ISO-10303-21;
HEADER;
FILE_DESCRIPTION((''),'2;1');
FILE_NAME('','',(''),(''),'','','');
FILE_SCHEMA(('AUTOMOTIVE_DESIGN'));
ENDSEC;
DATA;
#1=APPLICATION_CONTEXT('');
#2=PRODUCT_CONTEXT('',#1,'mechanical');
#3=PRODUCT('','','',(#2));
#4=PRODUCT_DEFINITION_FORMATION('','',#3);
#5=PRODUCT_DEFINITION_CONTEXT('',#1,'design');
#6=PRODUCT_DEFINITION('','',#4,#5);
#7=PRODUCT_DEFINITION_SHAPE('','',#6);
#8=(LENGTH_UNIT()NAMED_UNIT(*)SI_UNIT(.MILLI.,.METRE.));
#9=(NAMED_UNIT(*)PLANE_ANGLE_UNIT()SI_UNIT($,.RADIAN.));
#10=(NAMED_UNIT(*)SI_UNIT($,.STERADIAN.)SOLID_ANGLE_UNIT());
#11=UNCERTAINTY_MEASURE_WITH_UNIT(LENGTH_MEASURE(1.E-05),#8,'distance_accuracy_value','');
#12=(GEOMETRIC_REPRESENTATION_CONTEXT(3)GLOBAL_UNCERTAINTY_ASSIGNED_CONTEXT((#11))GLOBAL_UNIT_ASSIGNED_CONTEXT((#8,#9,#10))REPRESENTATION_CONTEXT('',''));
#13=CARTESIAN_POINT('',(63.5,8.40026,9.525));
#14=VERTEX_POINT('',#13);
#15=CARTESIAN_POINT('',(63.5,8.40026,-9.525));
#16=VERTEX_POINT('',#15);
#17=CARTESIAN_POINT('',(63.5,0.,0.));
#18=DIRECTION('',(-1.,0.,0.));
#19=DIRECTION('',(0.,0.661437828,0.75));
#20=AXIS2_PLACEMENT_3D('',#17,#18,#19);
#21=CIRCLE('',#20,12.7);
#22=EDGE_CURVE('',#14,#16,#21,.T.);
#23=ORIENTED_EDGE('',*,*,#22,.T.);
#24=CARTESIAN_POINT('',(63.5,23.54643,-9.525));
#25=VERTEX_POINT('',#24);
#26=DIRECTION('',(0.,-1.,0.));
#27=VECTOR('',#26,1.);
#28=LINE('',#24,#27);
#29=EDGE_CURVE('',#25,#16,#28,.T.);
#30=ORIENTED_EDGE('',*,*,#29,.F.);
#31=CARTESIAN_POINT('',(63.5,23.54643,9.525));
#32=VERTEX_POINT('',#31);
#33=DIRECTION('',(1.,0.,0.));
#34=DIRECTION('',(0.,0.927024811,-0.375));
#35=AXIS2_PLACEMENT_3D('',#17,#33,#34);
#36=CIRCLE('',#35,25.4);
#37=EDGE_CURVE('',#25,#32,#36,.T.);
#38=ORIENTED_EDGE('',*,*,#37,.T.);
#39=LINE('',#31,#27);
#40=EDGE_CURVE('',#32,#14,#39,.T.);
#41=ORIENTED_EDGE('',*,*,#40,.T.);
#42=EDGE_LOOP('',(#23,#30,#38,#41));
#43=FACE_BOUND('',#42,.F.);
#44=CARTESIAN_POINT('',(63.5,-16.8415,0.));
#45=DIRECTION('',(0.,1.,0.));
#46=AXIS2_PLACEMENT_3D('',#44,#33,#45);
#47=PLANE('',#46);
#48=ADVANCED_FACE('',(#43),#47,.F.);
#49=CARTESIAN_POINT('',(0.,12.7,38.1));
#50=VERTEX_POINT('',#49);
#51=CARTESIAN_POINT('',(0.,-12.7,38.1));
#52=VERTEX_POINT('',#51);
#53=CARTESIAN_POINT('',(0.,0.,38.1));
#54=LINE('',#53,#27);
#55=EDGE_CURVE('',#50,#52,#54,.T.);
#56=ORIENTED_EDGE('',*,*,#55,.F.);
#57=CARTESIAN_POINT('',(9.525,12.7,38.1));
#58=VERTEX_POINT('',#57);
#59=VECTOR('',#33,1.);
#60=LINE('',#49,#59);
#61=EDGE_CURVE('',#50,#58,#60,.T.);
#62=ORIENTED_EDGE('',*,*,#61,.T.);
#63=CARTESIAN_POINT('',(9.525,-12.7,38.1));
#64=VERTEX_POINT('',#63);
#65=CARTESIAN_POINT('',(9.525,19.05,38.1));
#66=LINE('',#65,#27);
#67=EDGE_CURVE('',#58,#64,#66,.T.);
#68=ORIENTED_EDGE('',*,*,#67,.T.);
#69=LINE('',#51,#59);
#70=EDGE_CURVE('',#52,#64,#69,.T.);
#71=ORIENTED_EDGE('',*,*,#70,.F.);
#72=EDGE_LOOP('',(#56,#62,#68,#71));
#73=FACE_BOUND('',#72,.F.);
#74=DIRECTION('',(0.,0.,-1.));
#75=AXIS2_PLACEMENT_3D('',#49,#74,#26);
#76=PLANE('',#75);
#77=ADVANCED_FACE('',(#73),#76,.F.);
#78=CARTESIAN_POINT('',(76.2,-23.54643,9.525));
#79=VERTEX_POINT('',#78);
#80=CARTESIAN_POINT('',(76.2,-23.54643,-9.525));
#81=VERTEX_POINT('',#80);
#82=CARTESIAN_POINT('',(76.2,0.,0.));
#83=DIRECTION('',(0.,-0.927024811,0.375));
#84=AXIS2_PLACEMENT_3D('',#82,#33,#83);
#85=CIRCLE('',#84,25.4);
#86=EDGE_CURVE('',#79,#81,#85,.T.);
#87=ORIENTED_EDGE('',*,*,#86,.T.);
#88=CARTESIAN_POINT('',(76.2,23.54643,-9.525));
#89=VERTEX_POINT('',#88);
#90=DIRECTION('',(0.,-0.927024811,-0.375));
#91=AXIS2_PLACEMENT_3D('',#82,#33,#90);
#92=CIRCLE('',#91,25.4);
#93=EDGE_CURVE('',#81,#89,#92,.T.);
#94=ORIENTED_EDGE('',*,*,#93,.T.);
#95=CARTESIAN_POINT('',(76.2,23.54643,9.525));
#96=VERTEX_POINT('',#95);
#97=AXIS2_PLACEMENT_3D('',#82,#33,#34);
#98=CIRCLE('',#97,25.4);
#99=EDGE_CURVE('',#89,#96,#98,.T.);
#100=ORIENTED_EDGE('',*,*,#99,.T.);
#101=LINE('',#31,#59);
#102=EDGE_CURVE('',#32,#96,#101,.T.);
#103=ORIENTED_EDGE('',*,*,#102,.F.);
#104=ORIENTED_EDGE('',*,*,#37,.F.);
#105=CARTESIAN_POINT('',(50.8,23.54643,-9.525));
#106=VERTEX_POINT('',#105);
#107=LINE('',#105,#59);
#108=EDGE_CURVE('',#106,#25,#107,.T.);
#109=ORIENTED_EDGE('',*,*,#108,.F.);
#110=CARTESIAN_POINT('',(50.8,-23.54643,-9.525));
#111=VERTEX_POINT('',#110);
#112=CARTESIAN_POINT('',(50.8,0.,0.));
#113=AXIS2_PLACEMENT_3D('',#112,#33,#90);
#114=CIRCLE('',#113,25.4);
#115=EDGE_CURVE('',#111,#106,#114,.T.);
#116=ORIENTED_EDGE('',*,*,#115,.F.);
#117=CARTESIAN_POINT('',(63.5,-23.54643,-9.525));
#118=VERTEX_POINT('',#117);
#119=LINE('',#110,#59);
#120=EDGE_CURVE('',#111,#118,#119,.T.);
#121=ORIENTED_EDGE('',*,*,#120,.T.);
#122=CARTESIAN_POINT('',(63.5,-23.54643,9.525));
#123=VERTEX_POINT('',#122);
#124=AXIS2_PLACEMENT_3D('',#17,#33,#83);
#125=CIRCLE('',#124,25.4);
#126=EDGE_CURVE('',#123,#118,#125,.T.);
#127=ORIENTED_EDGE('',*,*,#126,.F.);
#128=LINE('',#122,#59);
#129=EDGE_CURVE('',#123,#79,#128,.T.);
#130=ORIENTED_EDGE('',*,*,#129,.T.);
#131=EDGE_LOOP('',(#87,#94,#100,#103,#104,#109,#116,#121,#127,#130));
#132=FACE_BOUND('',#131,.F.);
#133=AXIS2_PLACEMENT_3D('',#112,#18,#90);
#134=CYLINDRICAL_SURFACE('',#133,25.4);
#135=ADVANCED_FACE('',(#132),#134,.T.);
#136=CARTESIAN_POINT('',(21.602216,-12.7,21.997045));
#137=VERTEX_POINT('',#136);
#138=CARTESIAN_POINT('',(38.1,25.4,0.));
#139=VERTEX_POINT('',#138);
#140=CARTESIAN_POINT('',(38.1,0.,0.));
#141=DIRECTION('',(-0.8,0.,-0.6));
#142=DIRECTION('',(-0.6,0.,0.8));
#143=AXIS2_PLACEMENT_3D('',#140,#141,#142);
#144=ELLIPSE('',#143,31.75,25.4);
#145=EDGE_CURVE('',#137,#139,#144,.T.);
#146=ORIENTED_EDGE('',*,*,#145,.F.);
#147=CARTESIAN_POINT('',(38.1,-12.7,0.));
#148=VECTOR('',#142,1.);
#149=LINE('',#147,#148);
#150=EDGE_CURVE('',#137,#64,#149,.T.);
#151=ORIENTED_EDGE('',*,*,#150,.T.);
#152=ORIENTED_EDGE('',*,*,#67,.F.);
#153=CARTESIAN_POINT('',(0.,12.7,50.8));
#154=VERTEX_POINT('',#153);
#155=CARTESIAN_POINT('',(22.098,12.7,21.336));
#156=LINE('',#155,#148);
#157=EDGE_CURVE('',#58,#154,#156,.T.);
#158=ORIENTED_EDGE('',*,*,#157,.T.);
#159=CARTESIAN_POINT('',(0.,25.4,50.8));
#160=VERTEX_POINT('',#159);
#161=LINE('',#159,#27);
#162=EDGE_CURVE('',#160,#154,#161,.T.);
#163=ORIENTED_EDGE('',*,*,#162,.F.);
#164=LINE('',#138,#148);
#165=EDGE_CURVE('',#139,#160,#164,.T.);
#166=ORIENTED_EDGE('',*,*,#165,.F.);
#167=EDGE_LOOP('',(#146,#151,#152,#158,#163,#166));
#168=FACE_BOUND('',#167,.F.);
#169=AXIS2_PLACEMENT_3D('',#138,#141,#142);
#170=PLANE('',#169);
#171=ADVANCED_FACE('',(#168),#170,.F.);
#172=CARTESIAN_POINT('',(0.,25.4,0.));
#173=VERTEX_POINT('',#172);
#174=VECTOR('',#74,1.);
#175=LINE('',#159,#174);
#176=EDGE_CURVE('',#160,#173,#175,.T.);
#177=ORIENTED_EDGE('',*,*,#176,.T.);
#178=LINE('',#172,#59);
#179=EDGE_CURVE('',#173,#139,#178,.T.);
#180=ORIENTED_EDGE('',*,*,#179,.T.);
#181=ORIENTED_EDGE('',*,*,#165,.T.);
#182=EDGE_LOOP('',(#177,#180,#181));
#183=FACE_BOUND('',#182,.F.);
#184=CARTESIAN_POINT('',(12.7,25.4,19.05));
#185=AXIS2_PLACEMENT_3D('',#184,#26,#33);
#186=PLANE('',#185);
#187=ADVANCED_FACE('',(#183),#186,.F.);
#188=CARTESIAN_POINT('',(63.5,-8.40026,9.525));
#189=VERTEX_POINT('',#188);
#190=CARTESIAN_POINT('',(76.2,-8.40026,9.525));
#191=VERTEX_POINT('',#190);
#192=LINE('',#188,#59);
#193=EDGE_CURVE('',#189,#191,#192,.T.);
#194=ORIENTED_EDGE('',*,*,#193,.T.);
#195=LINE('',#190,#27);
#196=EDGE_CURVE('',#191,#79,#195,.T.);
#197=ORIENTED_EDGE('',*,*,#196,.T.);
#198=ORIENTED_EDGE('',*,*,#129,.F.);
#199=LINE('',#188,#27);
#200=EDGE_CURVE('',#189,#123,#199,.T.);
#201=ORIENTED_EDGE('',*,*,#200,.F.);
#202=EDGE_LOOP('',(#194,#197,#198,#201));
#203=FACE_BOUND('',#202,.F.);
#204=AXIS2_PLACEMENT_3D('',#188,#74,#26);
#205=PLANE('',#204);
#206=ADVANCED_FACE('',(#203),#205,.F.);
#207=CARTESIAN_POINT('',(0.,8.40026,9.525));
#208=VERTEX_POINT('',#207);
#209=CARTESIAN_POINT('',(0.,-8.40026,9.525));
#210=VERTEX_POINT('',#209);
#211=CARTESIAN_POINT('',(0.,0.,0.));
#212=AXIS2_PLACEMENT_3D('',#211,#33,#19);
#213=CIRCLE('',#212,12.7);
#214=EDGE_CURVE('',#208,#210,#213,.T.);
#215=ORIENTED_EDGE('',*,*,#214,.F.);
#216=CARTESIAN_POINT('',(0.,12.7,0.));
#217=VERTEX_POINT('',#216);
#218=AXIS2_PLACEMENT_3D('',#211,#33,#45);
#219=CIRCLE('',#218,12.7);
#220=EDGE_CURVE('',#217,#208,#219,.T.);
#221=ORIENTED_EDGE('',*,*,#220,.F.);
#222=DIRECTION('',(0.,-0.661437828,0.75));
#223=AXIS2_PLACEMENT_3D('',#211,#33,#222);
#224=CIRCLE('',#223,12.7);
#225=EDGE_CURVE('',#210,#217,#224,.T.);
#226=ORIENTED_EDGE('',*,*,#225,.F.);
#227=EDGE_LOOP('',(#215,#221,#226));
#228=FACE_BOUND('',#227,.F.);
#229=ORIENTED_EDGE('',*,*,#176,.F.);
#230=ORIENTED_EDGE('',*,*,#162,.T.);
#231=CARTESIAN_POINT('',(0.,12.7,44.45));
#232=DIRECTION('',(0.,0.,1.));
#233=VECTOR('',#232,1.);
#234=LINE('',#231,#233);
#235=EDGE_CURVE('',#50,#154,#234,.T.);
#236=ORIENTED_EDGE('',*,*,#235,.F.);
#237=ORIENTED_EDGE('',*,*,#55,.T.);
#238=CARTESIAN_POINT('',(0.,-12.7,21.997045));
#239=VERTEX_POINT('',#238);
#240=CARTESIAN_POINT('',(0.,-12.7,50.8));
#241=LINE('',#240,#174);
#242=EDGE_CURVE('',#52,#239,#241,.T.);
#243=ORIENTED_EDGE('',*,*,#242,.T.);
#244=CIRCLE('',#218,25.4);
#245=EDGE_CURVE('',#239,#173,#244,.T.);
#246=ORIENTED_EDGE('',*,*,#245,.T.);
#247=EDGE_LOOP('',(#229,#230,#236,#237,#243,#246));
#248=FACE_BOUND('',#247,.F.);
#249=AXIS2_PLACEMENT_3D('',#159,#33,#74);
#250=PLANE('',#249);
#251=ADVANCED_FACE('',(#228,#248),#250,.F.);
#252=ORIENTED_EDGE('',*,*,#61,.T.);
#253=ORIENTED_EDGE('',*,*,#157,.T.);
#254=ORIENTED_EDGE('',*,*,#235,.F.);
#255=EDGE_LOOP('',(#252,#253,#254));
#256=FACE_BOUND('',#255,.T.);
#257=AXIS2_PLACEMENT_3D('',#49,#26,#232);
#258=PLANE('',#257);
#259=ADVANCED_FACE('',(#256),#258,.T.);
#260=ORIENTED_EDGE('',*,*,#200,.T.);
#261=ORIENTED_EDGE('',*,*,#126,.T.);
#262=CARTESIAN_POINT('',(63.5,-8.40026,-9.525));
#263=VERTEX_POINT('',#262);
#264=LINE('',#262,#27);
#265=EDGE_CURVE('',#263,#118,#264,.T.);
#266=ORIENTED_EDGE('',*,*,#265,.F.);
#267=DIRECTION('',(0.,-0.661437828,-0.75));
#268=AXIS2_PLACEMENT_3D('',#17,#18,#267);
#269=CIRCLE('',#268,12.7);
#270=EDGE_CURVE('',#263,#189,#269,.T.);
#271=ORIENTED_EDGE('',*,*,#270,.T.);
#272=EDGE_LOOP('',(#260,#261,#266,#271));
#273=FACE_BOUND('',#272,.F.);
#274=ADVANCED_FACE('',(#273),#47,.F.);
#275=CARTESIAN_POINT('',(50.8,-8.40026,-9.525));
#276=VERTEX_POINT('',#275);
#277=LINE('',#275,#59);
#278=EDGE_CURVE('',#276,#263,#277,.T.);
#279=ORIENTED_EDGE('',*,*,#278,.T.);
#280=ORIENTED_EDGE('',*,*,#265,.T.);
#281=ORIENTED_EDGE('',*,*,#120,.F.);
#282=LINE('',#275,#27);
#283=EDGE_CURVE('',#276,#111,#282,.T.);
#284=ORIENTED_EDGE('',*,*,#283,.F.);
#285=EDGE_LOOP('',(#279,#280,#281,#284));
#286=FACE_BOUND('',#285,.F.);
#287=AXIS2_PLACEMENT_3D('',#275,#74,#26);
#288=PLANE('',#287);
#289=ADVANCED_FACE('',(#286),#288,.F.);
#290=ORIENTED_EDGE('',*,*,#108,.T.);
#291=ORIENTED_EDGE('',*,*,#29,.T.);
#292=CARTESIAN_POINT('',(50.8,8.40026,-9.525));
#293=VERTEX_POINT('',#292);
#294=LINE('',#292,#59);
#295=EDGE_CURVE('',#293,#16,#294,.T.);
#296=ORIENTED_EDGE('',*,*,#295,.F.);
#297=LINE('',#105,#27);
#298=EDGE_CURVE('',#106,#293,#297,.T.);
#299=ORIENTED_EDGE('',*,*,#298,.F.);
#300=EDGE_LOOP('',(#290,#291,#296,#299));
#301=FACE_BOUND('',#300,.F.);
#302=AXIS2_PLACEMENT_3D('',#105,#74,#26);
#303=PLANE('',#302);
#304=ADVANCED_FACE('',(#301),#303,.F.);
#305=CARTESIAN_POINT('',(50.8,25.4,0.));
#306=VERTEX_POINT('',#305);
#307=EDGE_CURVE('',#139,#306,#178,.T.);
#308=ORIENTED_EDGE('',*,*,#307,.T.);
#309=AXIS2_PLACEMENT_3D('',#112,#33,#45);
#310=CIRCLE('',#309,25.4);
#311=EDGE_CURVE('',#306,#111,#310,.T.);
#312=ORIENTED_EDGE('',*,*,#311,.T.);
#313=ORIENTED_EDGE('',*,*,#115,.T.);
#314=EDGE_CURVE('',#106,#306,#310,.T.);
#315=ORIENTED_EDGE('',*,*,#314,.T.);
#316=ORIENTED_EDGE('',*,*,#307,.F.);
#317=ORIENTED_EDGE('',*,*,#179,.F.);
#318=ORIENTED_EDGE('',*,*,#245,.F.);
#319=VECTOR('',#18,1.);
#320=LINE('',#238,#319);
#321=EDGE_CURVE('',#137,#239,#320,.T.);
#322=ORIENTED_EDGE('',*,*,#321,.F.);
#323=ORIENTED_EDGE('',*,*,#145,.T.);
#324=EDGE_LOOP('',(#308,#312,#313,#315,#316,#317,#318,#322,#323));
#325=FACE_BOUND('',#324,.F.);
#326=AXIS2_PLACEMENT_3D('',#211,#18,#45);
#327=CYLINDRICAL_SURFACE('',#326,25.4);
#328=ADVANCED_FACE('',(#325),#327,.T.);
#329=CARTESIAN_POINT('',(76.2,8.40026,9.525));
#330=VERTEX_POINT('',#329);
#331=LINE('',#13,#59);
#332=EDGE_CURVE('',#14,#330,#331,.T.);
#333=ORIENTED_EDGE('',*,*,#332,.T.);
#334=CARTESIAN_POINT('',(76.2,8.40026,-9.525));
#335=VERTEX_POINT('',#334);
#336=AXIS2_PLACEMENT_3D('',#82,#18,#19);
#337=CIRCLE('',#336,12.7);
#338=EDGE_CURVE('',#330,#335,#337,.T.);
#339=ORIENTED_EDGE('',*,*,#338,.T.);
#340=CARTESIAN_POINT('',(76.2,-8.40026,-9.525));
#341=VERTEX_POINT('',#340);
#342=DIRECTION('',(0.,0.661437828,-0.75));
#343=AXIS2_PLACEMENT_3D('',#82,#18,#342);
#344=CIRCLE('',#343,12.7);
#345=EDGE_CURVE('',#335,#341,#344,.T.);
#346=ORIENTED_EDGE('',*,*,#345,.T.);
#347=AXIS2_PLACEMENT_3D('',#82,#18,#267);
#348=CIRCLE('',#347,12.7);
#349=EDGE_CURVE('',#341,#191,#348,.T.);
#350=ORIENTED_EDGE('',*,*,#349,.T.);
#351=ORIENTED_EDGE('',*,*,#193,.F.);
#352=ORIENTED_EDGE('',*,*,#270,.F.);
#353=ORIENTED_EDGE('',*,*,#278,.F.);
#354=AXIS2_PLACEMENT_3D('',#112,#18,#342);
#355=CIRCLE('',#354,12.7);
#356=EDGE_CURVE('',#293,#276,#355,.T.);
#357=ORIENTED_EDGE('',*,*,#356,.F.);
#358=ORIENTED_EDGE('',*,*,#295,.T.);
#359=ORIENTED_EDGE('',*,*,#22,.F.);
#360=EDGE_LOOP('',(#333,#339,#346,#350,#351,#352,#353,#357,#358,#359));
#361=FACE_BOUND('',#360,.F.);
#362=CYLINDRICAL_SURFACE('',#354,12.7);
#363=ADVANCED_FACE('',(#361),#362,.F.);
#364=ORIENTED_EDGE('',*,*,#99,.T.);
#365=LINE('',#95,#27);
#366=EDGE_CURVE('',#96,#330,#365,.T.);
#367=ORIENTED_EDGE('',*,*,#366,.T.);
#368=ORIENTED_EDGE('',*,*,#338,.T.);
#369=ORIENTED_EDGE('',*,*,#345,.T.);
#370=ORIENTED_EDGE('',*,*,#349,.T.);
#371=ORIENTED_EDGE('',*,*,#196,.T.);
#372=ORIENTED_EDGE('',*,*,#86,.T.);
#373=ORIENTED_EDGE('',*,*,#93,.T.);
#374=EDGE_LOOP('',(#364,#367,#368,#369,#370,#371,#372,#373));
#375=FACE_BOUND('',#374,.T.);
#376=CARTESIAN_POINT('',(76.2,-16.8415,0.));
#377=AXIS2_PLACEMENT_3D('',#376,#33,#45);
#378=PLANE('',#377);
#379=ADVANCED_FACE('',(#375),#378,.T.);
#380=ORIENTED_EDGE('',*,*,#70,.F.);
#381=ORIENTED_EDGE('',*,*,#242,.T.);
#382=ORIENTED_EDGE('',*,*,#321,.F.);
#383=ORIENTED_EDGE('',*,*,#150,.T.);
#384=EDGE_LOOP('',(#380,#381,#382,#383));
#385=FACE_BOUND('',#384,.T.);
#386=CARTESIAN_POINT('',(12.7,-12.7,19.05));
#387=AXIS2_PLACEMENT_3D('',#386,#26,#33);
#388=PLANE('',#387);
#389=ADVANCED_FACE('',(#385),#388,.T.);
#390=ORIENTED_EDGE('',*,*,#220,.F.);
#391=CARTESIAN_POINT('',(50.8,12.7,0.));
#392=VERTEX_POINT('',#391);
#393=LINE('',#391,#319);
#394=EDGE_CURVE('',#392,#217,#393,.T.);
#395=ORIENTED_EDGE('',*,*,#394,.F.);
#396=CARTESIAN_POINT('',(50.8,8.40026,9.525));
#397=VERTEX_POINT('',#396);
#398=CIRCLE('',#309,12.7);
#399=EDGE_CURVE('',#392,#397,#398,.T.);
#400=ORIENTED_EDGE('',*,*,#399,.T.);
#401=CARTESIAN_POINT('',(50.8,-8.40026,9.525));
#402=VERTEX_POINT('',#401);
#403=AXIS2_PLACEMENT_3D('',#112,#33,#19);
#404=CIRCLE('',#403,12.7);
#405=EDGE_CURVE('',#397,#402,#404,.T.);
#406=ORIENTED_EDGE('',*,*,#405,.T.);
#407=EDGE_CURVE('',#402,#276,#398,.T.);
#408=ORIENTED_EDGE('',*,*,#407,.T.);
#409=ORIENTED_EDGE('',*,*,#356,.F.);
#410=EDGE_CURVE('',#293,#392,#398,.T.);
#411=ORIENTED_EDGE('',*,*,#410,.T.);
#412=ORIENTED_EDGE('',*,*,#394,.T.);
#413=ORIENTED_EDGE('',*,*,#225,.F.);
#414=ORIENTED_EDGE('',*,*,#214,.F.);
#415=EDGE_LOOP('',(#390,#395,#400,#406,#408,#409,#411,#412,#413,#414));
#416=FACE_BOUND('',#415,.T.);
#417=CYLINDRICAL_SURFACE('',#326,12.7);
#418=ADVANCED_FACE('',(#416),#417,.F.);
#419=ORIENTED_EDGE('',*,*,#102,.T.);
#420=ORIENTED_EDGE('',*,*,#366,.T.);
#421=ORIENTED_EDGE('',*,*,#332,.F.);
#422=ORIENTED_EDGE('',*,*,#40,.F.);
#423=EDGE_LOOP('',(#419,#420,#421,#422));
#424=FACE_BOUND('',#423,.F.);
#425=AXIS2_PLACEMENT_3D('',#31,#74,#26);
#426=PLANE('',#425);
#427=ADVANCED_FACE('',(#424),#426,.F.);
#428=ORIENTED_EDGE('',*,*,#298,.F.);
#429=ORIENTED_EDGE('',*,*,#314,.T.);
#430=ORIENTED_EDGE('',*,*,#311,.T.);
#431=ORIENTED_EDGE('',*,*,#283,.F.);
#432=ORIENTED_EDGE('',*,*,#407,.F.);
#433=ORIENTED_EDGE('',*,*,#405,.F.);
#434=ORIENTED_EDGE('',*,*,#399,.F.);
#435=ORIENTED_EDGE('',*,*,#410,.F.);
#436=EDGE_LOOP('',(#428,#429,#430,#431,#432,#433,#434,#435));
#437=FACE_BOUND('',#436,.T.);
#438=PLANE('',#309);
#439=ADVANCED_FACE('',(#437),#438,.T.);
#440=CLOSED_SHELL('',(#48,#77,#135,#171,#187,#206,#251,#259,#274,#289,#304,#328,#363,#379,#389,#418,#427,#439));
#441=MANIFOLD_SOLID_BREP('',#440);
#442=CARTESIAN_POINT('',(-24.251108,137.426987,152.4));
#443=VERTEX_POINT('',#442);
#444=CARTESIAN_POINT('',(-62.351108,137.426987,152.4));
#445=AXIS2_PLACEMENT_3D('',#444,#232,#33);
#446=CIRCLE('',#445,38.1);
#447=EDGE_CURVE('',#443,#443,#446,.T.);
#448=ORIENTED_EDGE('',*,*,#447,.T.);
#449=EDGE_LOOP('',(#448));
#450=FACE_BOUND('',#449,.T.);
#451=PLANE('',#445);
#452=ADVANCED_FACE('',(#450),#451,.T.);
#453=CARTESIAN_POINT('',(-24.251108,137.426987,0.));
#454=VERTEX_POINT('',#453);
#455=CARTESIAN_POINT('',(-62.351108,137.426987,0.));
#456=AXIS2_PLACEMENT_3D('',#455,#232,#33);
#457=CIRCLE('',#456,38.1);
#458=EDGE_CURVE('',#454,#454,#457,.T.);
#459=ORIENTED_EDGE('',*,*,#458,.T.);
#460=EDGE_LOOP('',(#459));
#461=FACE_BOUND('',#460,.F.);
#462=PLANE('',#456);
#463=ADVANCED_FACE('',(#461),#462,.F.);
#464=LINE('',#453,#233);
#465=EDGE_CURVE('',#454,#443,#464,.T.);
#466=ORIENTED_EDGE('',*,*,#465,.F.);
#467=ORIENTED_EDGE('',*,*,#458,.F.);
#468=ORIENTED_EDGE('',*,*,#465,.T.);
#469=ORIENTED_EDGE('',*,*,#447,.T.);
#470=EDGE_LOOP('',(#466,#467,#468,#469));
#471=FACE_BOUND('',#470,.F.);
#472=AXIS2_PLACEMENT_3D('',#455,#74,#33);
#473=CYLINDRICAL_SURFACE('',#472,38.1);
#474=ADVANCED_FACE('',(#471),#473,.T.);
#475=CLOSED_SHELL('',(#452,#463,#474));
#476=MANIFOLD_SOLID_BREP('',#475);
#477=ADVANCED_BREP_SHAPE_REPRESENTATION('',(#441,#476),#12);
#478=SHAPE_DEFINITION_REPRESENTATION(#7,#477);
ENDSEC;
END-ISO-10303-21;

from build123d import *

# Parameters (mm, degrees)
F0_R      = 25.4
F0_R_2    = 12.7
F1_DEPTH  = 50.8
F3_DEPTH  = 12.7
F5_DEPTH  = 12.7
F8_DEPTH  = 38.1
F9_DEPTH  = 50.801
F10_W     = 25.4
F10_H     = 12.7
F11_DEPTH = 25.4
F12_R     = 38.1
F13_DEPTH = 152.4


with BuildPart() as f1:
    # F0 (on Right) → F1 (new body)
    with BuildSketch(Plane.YZ):
        Circle(F0_R)
        Circle(F0_R_2, mode=Mode.SUBTRACT)
    extrude(amount=F1_DEPTH)

    # F2 (on face) → F3 (join)
    with BuildSketch(Plane.YZ.offset(50.8)):
        with BuildLine():
            Line((-8.4002604126, -9.525), (-23.5464301965, -9.525))
            ThreePointArc((-23.5464301965, -9.525), (0, -25.4), (23.5464301965, -9.525))
            Line((23.5464301965, -9.525), (8.4002604126, -9.525))
            ThreePointArc((8.4002604126, -9.525), (0, -12.7), (-8.4002604126, -9.525))
        make_face()
    extrude(amount=F3_DEPTH)

    # F4 (on face) → F5 (join)
    with BuildSketch(Plane.YZ.offset(63.5)):
        with BuildLine():
            Line((-8.4002604126, 9.525), (-23.5464301965, 9.525))
            ThreePointArc((-23.5464301965, 9.525), (-25.4, 0), (-23.5464301965, -9.525))
            Line((-23.5464301965, -9.525), (-8.4002604126, -9.525))
            ThreePointArc((-8.4002604126, -9.525), (-12.7, 0), (-8.4002604126, 9.525))
        make_face()
        with BuildLine():
            ThreePointArc((23.5464301965, -9.525), (25.4, 0), (23.5464301965, 9.525))
            Line((23.5464301965, 9.525), (8.4002604126, 9.525))
            ThreePointArc((8.4002604126, 9.525), (12.7, 0), (8.4002604126, -9.525))
            Line((8.4002604126, -9.525), (23.5464301965, -9.525))
        make_face()
        with BuildLine():
            Line((-8.4002604126, -9.525), (-23.5464301965, -9.525))
            ThreePointArc((-23.5464301965, -9.525), (0, -25.4), (23.5464301965, -9.525))
            Line((23.5464301965, -9.525), (8.4002604126, -9.525))
            ThreePointArc((8.4002604126, -9.525), (0, -12.7), (-8.4002604126, -9.525))
        make_face()
    extrude(amount=F5_DEPTH)

    # F7 (on offset) → F8 (join)
    with BuildSketch(Plane.XZ.offset(-25.4)):
        Polygon((0, 50.8), (0, 0), (38.1, 0), align=None)
    extrude(amount=F8_DEPTH)

    # F2 (on face) → F9 (cut, through all)
    with BuildSketch(Plane.YZ.offset(50.8)):
        with BuildLine():
            ThreePointArc((8.4002604126, 9.525), (0, 12.7), (-8.4002604126, 9.525))
            Line((-8.4002604126, 9.525), (8.4002604126, 9.525))
        make_face()
        with BuildLine():
            Line((8.4002604126, 9.525), (-8.4002604126, 9.525))
            ThreePointArc((-8.4002604126, 9.525), (-12.7, 0), (-8.4002604126, -9.525))
            Line((-8.4002604126, -9.525), (8.4002604126, -9.525))
            ThreePointArc((8.4002604126, -9.525), (11.5752604126, -5.2252604126), (12.7, 0))
            ThreePointArc((12.7, 0), (11.5752604126, 5.2252604126), (8.4002604126, 9.525))
        make_face()
    extrude(amount=-F9_DEPTH, mode=Mode.SUBTRACT)

    # F10 (on face) → F11 (cut)
    with BuildSketch(Plane(origin=(0, 0, 0), x_dir=(0, -1, 0), z_dir=(-1, 0, 0))):
        with Locations((0, 44.45)):
            Rectangle(F10_W, F10_H)
    extrude(amount=-F11_DEPTH, mode=Mode.SUBTRACT)


with BuildPart() as f13:
    # F12 (on Top) → F13 (new body)
    with BuildSketch(Plane.XY):
        with Locations((-62.3511075974, 137.4269872904)):
            Circle(F12_R)
    extrude(amount=F13_DEPTH)


solid = Compound([f1.part, f13.part])
